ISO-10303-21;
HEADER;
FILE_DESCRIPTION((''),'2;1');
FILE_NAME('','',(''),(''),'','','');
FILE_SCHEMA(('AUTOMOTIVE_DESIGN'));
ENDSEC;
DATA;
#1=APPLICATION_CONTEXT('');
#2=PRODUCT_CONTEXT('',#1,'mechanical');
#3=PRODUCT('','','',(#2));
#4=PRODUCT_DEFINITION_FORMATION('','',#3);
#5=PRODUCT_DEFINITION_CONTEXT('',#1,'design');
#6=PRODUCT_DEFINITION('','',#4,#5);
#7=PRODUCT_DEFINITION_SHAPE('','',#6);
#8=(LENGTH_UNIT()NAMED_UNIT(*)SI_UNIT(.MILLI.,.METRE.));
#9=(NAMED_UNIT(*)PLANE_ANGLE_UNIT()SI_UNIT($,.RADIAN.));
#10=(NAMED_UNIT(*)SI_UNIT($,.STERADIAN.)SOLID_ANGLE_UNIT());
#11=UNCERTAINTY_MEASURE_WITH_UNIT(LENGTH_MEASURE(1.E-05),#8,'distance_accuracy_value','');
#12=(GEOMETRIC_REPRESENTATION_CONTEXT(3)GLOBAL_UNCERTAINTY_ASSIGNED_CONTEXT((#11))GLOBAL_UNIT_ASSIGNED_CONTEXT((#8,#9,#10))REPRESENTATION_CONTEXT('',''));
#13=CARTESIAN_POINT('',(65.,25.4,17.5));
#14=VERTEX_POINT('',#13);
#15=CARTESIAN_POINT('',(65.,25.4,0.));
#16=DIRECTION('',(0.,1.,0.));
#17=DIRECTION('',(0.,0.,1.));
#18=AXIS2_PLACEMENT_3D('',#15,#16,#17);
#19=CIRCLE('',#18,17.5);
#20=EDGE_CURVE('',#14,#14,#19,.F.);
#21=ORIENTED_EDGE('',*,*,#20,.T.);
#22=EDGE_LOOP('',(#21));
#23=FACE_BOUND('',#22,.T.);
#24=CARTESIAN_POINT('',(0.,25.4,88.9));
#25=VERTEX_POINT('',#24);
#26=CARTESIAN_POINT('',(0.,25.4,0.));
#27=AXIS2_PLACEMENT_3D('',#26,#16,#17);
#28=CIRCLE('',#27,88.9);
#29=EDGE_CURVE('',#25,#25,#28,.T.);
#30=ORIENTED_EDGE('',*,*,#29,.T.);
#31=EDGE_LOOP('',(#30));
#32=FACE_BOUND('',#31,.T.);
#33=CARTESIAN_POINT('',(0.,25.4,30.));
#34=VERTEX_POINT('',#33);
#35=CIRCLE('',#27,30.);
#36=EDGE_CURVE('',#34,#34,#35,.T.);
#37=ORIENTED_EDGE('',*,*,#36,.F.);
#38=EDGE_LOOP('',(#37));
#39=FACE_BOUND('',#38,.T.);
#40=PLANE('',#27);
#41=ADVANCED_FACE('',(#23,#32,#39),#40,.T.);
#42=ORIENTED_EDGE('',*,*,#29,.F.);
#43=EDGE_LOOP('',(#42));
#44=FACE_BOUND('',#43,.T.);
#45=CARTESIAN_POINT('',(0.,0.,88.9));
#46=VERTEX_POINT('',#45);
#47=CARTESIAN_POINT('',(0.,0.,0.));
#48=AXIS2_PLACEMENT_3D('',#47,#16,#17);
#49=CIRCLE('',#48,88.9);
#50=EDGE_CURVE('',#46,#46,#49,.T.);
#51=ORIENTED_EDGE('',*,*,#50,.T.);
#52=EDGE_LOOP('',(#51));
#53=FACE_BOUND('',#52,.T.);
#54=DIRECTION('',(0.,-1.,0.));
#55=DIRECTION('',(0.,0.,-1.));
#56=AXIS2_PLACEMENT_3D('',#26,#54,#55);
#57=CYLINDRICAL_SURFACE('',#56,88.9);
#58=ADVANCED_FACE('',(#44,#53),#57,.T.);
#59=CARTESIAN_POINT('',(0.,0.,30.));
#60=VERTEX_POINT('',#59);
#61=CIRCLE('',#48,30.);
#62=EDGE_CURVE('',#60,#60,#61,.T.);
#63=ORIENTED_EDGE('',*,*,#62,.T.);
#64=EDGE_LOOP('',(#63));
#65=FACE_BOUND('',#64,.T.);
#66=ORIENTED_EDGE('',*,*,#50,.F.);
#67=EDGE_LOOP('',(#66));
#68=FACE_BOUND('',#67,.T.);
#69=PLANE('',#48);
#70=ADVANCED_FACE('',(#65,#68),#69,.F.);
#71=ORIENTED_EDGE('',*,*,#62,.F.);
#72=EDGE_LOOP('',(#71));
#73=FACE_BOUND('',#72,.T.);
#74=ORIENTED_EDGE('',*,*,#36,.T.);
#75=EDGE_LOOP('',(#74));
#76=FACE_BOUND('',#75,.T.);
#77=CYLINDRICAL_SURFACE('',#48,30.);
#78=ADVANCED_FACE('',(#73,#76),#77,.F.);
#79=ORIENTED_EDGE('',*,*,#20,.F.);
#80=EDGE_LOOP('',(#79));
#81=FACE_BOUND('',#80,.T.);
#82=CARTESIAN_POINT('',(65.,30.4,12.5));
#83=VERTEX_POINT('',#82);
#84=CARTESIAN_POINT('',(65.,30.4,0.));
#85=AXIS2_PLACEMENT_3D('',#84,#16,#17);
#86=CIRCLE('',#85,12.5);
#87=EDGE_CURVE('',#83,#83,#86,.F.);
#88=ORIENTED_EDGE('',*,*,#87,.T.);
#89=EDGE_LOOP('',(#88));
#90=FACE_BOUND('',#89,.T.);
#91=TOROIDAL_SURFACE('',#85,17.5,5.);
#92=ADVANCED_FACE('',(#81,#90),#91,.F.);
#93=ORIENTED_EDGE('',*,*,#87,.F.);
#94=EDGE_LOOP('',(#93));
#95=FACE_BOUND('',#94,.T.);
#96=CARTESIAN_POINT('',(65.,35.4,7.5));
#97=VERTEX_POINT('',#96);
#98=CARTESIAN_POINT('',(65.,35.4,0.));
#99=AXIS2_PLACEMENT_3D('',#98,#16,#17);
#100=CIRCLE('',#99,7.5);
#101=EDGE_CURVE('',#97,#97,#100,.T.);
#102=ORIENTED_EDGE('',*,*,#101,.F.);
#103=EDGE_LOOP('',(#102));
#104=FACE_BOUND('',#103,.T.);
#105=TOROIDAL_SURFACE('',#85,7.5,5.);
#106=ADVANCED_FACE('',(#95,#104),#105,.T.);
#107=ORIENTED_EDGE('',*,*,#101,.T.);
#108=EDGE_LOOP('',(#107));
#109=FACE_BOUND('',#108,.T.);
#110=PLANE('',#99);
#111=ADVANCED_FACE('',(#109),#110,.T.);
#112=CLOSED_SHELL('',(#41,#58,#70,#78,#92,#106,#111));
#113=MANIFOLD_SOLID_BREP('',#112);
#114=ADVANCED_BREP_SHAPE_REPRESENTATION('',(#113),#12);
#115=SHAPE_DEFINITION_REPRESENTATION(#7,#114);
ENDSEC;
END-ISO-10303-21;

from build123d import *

# Parameters (mm, degrees)
SKETCH1_R           = 88.9
BOSS_EXTRUDE1_DEPTH = 25.4
SKETCH2_R           = 12.5
BOSS_EXTRUDE2_DEPTH = 10
FILLET1_R           = 5
SKETCH3_R           = 30
CUT_EXTRUDE1_DEPTH  = 129.263712717


with BuildPart() as part:
    # Sketch1 → Boss-Extrude1 (new body)
    with BuildSketch(Plane(origin=(0, 0, 0), x_dir=(1, 0, 0), z_dir=(0, 1, 0))):
        with Locations(Location((0, 0, 0), (0, 0, 270))):
            Circle(SKETCH1_R)
    extrude(amount=BOSS_EXTRUDE1_DEPTH)

    # Sketch2 → Boss-Extrude2 (add)
    with BuildSketch(Plane(origin=(0, 25.4, 0), x_dir=(1, 0, 0), z_dir=(0, 1, 0))):
        with Locations(Location((65, 0, 0), (0, 0, 270))):
            Circle(SKETCH2_R)
    extrude(amount=BOSS_EXTRUDE2_DEPTH)

    # Fillet1
    fillet1_edges = [part.edges().sort_by_distance(p)[0] for p in [
        (65, 25.4, -12.5),
        (65, 35.4, -12.5),
    ]]
    fillet(fillet1_edges, radius=FILLET1_R - 0.0001)  # a hair under: the kernel refuses the full size

    # Sketch3 → Cut-Extrude1 (cut, through all)
    with BuildSketch(Plane(origin=(0, 25.4, 0), x_dir=(1, 0, 0), z_dir=(0, 1, 0))):
        with Locations(Location((0, 0, 0), (0, 0, 270))):
            Circle(SKETCH3_R)
    extrude(amount=-CUT_EXTRUDE1_DEPTH, mode=Mode.SUBTRACT)


solid = part.part
